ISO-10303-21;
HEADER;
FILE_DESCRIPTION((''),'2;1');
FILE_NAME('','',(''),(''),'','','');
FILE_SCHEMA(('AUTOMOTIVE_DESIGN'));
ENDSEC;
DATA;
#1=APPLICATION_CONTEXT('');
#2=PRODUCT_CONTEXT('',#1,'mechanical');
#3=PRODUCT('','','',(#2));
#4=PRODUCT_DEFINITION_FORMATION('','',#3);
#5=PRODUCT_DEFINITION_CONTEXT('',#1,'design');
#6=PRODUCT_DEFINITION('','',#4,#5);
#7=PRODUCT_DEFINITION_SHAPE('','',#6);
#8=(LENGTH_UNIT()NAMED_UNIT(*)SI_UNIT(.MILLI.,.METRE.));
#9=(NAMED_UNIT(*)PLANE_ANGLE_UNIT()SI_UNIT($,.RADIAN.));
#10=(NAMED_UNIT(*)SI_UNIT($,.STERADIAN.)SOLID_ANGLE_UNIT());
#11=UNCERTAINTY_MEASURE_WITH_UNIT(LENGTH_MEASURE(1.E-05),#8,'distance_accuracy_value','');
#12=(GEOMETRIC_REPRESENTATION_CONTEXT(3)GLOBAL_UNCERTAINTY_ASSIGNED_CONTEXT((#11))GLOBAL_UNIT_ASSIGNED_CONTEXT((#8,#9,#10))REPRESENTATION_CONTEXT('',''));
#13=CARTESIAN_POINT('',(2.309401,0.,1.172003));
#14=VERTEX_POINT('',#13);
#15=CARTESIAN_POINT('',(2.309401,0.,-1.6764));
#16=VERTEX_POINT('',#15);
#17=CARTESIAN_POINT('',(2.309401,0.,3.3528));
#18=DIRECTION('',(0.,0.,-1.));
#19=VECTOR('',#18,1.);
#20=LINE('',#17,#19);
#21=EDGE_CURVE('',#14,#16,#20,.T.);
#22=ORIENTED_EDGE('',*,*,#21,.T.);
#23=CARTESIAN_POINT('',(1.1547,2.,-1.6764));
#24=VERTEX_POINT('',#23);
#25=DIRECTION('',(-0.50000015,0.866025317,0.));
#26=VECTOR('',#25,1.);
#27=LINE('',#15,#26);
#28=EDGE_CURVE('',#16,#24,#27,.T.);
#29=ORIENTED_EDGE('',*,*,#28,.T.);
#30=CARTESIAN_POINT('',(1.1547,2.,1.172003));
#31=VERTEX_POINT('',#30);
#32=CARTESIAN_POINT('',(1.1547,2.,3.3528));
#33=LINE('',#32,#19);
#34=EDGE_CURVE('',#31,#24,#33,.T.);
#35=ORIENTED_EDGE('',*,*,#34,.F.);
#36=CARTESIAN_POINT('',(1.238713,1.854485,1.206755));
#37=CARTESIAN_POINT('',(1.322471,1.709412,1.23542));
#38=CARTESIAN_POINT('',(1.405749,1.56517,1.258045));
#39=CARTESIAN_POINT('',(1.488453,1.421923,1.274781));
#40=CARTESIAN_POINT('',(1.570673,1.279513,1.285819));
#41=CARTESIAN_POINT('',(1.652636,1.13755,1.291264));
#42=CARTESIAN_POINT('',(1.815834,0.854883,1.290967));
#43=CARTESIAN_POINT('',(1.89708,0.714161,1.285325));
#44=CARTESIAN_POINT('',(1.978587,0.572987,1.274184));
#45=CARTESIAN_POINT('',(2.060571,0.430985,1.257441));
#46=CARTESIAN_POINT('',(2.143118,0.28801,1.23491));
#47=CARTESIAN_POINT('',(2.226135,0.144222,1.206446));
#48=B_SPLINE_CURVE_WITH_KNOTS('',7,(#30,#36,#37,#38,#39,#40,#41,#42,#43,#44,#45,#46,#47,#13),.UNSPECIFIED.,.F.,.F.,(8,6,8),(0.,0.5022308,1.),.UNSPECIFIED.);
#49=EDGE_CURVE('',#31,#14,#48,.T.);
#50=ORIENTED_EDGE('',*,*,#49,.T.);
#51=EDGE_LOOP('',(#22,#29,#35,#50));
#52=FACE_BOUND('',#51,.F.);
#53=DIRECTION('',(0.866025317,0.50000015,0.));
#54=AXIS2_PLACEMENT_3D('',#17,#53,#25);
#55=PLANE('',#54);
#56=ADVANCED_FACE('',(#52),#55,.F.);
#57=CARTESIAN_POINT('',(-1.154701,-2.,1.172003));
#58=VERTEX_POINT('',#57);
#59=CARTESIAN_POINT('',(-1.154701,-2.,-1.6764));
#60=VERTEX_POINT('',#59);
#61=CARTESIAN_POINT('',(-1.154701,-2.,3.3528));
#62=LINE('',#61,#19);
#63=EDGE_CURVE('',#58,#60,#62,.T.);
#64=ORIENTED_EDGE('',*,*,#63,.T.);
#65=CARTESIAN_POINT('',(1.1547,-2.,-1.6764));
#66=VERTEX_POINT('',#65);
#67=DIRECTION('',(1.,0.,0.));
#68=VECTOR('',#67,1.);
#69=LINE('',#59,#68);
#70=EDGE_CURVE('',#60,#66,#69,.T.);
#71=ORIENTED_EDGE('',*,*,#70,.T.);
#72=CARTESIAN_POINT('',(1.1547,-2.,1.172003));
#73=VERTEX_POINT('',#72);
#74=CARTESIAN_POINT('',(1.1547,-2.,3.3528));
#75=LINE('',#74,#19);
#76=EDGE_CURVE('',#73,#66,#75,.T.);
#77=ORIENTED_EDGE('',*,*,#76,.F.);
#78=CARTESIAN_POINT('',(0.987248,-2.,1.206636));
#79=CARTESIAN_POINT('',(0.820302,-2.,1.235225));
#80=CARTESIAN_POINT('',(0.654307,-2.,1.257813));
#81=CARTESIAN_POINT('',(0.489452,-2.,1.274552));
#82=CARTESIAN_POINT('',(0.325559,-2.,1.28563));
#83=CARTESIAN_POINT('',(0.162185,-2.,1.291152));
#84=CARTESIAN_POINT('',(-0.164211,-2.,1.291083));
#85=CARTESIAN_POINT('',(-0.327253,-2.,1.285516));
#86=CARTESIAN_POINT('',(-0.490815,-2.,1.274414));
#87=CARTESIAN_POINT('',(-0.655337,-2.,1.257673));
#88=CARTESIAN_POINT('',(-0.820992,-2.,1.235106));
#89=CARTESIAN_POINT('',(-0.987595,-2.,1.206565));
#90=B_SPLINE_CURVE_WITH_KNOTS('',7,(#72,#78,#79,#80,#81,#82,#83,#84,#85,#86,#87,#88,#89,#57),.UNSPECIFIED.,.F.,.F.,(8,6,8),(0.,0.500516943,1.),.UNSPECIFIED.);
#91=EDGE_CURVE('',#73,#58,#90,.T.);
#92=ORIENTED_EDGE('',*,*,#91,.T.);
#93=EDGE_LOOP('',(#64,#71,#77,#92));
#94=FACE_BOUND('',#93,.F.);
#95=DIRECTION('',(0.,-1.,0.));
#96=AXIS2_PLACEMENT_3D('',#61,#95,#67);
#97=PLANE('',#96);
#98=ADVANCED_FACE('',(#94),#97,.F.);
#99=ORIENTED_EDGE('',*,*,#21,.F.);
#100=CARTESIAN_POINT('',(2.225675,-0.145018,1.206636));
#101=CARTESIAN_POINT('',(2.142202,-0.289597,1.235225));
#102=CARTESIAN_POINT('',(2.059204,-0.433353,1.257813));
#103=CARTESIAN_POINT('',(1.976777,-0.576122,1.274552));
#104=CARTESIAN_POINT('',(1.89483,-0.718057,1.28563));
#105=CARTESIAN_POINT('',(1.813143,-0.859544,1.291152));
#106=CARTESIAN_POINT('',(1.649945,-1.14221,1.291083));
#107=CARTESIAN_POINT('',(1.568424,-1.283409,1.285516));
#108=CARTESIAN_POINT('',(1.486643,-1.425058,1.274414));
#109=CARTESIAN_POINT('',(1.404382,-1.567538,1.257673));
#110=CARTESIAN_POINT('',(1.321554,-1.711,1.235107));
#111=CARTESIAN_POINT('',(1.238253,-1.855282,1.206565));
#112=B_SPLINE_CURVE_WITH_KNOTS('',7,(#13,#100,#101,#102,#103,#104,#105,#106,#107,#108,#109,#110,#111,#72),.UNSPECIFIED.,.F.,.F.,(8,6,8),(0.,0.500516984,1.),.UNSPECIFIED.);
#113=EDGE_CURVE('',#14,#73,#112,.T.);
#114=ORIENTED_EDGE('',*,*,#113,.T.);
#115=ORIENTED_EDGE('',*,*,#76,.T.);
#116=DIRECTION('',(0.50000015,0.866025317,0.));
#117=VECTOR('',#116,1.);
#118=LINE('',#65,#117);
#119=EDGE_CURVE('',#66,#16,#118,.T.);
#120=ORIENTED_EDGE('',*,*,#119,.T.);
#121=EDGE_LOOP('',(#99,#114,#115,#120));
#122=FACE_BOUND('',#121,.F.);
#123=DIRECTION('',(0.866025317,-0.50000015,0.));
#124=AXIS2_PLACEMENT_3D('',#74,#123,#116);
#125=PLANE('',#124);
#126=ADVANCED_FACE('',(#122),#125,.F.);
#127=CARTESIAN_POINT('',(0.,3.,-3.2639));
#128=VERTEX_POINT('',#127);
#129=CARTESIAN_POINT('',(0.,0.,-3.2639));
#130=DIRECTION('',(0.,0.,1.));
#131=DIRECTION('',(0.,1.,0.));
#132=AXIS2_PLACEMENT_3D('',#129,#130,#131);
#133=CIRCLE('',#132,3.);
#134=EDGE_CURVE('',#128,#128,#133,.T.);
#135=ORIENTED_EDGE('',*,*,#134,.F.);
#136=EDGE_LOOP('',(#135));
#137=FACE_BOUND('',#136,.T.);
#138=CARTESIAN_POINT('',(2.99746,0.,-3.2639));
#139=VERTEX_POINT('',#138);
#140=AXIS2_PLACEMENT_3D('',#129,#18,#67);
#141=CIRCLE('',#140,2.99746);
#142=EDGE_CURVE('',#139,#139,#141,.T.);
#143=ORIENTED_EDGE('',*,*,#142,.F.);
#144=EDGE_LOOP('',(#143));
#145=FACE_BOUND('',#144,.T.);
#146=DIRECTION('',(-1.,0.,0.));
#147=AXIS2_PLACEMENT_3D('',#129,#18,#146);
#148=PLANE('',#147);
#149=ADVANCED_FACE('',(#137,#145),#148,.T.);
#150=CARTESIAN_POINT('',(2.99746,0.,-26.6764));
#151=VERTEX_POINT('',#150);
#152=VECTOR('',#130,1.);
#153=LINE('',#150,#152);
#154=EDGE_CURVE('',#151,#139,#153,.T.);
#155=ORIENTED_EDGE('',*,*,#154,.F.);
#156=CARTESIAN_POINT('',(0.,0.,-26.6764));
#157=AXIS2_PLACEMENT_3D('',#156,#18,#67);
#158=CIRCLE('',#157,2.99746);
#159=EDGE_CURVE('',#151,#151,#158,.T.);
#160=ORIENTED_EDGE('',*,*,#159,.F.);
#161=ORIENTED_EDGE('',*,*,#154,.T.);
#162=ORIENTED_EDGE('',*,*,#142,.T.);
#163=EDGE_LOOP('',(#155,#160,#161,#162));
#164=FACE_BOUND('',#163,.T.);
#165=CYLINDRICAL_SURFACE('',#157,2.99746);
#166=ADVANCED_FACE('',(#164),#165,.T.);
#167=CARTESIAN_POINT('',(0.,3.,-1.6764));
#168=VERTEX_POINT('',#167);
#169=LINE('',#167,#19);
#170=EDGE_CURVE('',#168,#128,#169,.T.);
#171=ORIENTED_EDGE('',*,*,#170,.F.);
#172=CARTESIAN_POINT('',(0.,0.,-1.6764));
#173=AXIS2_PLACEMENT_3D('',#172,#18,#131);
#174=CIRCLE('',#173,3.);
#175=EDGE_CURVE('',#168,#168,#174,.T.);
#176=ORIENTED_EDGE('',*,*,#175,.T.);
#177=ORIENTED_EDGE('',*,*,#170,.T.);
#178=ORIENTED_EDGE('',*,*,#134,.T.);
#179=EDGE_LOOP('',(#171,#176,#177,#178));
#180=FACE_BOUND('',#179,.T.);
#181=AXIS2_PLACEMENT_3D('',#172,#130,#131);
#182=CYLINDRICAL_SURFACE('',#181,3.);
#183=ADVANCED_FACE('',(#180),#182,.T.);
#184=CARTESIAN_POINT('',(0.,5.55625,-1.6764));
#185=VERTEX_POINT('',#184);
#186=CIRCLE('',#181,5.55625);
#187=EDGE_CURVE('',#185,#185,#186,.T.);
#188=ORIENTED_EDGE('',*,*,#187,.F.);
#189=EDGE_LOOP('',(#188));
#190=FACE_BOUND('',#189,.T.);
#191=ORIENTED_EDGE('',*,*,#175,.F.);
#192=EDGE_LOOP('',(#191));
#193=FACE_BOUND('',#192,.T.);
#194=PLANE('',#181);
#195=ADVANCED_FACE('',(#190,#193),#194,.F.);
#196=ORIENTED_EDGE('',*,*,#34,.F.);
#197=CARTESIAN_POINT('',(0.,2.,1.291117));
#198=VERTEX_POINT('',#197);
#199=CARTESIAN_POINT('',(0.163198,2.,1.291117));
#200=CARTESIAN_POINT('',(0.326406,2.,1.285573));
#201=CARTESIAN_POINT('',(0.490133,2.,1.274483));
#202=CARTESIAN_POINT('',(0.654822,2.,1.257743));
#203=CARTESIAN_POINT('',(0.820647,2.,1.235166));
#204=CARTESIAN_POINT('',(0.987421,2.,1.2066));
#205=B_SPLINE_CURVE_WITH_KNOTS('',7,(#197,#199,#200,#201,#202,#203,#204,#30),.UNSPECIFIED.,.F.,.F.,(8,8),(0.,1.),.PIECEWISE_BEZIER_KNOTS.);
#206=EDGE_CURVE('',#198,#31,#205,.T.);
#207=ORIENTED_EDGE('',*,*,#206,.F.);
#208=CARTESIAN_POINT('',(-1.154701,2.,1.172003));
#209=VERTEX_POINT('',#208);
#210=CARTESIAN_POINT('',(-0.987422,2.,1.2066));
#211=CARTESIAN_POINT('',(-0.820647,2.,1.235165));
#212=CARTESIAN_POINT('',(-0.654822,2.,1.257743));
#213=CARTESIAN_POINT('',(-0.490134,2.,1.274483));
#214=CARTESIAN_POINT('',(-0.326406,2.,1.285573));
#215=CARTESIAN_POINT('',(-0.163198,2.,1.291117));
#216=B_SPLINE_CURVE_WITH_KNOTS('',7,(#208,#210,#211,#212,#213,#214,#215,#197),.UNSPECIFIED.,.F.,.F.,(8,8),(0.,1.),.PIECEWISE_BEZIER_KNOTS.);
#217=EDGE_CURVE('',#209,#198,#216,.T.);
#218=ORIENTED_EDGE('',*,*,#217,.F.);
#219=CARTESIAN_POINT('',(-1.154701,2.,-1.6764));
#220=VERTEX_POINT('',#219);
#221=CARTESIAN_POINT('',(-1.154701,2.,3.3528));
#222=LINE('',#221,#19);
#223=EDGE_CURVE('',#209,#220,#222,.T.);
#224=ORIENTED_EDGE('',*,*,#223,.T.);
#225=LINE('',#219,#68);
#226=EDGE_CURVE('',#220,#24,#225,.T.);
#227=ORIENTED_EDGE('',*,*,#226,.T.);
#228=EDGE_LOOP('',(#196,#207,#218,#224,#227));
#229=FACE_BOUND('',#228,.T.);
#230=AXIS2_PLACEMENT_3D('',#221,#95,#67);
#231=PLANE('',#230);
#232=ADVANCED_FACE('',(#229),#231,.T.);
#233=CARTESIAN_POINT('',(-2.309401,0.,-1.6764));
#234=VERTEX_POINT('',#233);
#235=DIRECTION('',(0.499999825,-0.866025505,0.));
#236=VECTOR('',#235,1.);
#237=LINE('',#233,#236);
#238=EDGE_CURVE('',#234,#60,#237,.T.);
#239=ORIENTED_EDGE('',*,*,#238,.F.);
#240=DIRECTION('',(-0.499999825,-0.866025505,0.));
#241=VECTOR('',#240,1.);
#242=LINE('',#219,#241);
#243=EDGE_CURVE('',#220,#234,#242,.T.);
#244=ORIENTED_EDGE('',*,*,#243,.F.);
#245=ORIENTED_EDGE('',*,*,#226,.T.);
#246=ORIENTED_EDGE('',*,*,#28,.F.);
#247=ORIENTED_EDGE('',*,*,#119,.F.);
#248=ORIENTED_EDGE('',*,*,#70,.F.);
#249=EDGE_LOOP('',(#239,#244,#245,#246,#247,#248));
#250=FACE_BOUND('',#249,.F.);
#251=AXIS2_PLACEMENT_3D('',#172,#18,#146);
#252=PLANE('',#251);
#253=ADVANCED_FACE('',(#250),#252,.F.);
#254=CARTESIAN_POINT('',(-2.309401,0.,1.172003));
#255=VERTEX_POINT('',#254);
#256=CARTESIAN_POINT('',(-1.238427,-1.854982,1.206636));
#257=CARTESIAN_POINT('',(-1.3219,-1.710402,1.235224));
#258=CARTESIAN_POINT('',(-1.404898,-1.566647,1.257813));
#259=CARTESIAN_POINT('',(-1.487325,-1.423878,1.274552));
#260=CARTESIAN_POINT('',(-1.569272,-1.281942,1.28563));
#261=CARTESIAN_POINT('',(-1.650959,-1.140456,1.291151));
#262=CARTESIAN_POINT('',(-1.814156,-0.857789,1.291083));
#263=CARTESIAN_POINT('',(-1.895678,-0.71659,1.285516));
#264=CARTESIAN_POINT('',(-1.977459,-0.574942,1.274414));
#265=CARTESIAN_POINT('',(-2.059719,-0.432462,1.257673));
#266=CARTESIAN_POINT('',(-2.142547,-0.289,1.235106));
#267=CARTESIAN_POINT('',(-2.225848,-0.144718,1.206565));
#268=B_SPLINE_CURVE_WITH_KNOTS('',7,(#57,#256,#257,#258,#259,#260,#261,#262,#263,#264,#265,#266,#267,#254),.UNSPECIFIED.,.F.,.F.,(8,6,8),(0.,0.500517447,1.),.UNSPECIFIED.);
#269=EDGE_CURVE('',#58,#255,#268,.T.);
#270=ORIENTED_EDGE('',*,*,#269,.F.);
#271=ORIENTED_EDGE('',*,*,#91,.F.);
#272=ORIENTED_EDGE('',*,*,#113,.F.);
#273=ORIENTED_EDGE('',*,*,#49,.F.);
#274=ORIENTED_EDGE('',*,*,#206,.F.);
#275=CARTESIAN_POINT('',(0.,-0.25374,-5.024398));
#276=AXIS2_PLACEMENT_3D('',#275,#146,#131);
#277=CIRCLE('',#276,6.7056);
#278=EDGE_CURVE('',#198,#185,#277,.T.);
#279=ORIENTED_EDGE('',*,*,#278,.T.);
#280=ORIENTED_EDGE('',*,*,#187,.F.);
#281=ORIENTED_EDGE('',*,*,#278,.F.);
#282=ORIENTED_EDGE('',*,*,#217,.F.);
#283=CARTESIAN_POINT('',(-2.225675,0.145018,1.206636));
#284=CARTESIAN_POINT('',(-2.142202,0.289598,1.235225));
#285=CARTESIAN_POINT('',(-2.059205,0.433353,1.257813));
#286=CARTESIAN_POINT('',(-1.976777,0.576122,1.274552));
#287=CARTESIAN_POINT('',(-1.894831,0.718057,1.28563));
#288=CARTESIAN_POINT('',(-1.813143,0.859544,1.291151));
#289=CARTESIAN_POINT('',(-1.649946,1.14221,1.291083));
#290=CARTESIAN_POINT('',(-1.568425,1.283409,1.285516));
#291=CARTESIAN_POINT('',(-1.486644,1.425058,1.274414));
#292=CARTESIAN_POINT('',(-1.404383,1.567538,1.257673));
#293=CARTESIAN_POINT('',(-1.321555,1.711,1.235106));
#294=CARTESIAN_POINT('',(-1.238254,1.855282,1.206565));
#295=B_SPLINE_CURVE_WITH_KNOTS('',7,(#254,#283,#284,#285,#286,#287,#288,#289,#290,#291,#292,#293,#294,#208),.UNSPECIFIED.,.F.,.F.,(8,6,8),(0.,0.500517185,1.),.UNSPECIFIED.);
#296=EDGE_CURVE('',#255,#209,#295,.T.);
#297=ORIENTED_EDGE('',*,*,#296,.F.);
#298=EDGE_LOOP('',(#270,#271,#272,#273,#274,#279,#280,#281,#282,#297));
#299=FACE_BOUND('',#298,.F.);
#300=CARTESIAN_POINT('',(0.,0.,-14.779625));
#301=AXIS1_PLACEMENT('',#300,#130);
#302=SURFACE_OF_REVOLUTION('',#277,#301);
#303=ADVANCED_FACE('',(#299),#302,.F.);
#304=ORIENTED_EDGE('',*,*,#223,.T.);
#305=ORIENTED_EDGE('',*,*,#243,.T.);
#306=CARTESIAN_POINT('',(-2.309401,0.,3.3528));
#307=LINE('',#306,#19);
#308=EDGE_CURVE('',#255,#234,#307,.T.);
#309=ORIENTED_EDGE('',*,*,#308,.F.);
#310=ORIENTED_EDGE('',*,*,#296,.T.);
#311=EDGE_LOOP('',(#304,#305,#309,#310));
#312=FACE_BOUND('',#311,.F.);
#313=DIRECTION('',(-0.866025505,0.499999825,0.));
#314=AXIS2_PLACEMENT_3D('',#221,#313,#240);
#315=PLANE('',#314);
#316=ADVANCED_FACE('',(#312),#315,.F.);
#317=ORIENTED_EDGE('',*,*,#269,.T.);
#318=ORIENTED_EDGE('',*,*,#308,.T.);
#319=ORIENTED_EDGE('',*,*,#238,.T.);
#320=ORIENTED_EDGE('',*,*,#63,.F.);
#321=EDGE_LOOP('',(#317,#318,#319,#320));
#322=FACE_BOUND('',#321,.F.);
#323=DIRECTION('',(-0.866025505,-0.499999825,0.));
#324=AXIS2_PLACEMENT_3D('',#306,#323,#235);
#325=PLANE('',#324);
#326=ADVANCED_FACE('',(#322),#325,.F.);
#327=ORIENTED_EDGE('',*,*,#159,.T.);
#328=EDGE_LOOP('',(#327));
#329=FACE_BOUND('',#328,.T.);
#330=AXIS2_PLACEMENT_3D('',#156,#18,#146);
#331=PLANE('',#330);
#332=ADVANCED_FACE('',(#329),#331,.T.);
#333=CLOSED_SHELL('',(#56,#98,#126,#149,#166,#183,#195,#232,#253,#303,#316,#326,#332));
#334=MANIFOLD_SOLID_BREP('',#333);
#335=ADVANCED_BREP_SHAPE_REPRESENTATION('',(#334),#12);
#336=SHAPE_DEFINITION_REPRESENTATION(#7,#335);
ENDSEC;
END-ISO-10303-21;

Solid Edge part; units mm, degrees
sketch "Sketch1" plane through (0, 0, 0) normal (1, 0, 0) x (0, 1, 0)
  line L0 (0, -1.6764) -> (0, 1.6764)
  arc A0 (0, 1.6764) -> (5.55625, -1.6764) centre (-0.25374, -5.024398) cw
  line L1 (0, -1.6764) -> (5.55625, -1.6764)
  dimension "D1" = 3.3528
  dimension "D2" = 6.7056
revolve "RevolvedProtrusion1" add sketch "Sketch1" angle 360 about axis through (0, 0, -14.779625) along (0, 0, 1)
sketch "Sketch2" plane through (0, 0, -1.6764) normal (0, 0, -1) x (0, 1, 0)
  circle A0 centre (0, 0) radius 3
  dimension "D1" = 6
extrude "Protrusion1" add sketch "Sketch2" along normal blind 25
sketch "Sketch3" plane through (0, 0, -26.6764) normal (0, 0, -1) x (1, 0, 0)
  circle A0 centre (0, 0) radius 2.99746
  dimension "D1" = 0.0025
extrude "Cutout1" cut sketch "Sketch3" against normal blind 23.4125 flip side to cut
sketch "Sketch4" plane through (-0.603226, 0.360624, 3.3528) normal (0, 0, 1) x (1, 0, 0)
  line L0 (-0.551475, 1.639376) -> (1.757926, 1.639376)
  line L1 (2.912627, -0.360624) -> (1.757926, 1.639376)
  line L2 (1.757926, -2.360624) -> (2.912627, -0.360624)
  line L3 (-0.551475, -2.360624) -> (1.757926, -2.360624)
  line L4 (-1.706175, -0.360624) -> (-0.551475, -2.360624)
  line L5 (-0.551475, 1.639376) -> (-1.706175, -0.360624)
extrude "ExtrudedCutout_11" cut sketch "Sketch4" against normal blind 5.0292
properties part number "185818"
